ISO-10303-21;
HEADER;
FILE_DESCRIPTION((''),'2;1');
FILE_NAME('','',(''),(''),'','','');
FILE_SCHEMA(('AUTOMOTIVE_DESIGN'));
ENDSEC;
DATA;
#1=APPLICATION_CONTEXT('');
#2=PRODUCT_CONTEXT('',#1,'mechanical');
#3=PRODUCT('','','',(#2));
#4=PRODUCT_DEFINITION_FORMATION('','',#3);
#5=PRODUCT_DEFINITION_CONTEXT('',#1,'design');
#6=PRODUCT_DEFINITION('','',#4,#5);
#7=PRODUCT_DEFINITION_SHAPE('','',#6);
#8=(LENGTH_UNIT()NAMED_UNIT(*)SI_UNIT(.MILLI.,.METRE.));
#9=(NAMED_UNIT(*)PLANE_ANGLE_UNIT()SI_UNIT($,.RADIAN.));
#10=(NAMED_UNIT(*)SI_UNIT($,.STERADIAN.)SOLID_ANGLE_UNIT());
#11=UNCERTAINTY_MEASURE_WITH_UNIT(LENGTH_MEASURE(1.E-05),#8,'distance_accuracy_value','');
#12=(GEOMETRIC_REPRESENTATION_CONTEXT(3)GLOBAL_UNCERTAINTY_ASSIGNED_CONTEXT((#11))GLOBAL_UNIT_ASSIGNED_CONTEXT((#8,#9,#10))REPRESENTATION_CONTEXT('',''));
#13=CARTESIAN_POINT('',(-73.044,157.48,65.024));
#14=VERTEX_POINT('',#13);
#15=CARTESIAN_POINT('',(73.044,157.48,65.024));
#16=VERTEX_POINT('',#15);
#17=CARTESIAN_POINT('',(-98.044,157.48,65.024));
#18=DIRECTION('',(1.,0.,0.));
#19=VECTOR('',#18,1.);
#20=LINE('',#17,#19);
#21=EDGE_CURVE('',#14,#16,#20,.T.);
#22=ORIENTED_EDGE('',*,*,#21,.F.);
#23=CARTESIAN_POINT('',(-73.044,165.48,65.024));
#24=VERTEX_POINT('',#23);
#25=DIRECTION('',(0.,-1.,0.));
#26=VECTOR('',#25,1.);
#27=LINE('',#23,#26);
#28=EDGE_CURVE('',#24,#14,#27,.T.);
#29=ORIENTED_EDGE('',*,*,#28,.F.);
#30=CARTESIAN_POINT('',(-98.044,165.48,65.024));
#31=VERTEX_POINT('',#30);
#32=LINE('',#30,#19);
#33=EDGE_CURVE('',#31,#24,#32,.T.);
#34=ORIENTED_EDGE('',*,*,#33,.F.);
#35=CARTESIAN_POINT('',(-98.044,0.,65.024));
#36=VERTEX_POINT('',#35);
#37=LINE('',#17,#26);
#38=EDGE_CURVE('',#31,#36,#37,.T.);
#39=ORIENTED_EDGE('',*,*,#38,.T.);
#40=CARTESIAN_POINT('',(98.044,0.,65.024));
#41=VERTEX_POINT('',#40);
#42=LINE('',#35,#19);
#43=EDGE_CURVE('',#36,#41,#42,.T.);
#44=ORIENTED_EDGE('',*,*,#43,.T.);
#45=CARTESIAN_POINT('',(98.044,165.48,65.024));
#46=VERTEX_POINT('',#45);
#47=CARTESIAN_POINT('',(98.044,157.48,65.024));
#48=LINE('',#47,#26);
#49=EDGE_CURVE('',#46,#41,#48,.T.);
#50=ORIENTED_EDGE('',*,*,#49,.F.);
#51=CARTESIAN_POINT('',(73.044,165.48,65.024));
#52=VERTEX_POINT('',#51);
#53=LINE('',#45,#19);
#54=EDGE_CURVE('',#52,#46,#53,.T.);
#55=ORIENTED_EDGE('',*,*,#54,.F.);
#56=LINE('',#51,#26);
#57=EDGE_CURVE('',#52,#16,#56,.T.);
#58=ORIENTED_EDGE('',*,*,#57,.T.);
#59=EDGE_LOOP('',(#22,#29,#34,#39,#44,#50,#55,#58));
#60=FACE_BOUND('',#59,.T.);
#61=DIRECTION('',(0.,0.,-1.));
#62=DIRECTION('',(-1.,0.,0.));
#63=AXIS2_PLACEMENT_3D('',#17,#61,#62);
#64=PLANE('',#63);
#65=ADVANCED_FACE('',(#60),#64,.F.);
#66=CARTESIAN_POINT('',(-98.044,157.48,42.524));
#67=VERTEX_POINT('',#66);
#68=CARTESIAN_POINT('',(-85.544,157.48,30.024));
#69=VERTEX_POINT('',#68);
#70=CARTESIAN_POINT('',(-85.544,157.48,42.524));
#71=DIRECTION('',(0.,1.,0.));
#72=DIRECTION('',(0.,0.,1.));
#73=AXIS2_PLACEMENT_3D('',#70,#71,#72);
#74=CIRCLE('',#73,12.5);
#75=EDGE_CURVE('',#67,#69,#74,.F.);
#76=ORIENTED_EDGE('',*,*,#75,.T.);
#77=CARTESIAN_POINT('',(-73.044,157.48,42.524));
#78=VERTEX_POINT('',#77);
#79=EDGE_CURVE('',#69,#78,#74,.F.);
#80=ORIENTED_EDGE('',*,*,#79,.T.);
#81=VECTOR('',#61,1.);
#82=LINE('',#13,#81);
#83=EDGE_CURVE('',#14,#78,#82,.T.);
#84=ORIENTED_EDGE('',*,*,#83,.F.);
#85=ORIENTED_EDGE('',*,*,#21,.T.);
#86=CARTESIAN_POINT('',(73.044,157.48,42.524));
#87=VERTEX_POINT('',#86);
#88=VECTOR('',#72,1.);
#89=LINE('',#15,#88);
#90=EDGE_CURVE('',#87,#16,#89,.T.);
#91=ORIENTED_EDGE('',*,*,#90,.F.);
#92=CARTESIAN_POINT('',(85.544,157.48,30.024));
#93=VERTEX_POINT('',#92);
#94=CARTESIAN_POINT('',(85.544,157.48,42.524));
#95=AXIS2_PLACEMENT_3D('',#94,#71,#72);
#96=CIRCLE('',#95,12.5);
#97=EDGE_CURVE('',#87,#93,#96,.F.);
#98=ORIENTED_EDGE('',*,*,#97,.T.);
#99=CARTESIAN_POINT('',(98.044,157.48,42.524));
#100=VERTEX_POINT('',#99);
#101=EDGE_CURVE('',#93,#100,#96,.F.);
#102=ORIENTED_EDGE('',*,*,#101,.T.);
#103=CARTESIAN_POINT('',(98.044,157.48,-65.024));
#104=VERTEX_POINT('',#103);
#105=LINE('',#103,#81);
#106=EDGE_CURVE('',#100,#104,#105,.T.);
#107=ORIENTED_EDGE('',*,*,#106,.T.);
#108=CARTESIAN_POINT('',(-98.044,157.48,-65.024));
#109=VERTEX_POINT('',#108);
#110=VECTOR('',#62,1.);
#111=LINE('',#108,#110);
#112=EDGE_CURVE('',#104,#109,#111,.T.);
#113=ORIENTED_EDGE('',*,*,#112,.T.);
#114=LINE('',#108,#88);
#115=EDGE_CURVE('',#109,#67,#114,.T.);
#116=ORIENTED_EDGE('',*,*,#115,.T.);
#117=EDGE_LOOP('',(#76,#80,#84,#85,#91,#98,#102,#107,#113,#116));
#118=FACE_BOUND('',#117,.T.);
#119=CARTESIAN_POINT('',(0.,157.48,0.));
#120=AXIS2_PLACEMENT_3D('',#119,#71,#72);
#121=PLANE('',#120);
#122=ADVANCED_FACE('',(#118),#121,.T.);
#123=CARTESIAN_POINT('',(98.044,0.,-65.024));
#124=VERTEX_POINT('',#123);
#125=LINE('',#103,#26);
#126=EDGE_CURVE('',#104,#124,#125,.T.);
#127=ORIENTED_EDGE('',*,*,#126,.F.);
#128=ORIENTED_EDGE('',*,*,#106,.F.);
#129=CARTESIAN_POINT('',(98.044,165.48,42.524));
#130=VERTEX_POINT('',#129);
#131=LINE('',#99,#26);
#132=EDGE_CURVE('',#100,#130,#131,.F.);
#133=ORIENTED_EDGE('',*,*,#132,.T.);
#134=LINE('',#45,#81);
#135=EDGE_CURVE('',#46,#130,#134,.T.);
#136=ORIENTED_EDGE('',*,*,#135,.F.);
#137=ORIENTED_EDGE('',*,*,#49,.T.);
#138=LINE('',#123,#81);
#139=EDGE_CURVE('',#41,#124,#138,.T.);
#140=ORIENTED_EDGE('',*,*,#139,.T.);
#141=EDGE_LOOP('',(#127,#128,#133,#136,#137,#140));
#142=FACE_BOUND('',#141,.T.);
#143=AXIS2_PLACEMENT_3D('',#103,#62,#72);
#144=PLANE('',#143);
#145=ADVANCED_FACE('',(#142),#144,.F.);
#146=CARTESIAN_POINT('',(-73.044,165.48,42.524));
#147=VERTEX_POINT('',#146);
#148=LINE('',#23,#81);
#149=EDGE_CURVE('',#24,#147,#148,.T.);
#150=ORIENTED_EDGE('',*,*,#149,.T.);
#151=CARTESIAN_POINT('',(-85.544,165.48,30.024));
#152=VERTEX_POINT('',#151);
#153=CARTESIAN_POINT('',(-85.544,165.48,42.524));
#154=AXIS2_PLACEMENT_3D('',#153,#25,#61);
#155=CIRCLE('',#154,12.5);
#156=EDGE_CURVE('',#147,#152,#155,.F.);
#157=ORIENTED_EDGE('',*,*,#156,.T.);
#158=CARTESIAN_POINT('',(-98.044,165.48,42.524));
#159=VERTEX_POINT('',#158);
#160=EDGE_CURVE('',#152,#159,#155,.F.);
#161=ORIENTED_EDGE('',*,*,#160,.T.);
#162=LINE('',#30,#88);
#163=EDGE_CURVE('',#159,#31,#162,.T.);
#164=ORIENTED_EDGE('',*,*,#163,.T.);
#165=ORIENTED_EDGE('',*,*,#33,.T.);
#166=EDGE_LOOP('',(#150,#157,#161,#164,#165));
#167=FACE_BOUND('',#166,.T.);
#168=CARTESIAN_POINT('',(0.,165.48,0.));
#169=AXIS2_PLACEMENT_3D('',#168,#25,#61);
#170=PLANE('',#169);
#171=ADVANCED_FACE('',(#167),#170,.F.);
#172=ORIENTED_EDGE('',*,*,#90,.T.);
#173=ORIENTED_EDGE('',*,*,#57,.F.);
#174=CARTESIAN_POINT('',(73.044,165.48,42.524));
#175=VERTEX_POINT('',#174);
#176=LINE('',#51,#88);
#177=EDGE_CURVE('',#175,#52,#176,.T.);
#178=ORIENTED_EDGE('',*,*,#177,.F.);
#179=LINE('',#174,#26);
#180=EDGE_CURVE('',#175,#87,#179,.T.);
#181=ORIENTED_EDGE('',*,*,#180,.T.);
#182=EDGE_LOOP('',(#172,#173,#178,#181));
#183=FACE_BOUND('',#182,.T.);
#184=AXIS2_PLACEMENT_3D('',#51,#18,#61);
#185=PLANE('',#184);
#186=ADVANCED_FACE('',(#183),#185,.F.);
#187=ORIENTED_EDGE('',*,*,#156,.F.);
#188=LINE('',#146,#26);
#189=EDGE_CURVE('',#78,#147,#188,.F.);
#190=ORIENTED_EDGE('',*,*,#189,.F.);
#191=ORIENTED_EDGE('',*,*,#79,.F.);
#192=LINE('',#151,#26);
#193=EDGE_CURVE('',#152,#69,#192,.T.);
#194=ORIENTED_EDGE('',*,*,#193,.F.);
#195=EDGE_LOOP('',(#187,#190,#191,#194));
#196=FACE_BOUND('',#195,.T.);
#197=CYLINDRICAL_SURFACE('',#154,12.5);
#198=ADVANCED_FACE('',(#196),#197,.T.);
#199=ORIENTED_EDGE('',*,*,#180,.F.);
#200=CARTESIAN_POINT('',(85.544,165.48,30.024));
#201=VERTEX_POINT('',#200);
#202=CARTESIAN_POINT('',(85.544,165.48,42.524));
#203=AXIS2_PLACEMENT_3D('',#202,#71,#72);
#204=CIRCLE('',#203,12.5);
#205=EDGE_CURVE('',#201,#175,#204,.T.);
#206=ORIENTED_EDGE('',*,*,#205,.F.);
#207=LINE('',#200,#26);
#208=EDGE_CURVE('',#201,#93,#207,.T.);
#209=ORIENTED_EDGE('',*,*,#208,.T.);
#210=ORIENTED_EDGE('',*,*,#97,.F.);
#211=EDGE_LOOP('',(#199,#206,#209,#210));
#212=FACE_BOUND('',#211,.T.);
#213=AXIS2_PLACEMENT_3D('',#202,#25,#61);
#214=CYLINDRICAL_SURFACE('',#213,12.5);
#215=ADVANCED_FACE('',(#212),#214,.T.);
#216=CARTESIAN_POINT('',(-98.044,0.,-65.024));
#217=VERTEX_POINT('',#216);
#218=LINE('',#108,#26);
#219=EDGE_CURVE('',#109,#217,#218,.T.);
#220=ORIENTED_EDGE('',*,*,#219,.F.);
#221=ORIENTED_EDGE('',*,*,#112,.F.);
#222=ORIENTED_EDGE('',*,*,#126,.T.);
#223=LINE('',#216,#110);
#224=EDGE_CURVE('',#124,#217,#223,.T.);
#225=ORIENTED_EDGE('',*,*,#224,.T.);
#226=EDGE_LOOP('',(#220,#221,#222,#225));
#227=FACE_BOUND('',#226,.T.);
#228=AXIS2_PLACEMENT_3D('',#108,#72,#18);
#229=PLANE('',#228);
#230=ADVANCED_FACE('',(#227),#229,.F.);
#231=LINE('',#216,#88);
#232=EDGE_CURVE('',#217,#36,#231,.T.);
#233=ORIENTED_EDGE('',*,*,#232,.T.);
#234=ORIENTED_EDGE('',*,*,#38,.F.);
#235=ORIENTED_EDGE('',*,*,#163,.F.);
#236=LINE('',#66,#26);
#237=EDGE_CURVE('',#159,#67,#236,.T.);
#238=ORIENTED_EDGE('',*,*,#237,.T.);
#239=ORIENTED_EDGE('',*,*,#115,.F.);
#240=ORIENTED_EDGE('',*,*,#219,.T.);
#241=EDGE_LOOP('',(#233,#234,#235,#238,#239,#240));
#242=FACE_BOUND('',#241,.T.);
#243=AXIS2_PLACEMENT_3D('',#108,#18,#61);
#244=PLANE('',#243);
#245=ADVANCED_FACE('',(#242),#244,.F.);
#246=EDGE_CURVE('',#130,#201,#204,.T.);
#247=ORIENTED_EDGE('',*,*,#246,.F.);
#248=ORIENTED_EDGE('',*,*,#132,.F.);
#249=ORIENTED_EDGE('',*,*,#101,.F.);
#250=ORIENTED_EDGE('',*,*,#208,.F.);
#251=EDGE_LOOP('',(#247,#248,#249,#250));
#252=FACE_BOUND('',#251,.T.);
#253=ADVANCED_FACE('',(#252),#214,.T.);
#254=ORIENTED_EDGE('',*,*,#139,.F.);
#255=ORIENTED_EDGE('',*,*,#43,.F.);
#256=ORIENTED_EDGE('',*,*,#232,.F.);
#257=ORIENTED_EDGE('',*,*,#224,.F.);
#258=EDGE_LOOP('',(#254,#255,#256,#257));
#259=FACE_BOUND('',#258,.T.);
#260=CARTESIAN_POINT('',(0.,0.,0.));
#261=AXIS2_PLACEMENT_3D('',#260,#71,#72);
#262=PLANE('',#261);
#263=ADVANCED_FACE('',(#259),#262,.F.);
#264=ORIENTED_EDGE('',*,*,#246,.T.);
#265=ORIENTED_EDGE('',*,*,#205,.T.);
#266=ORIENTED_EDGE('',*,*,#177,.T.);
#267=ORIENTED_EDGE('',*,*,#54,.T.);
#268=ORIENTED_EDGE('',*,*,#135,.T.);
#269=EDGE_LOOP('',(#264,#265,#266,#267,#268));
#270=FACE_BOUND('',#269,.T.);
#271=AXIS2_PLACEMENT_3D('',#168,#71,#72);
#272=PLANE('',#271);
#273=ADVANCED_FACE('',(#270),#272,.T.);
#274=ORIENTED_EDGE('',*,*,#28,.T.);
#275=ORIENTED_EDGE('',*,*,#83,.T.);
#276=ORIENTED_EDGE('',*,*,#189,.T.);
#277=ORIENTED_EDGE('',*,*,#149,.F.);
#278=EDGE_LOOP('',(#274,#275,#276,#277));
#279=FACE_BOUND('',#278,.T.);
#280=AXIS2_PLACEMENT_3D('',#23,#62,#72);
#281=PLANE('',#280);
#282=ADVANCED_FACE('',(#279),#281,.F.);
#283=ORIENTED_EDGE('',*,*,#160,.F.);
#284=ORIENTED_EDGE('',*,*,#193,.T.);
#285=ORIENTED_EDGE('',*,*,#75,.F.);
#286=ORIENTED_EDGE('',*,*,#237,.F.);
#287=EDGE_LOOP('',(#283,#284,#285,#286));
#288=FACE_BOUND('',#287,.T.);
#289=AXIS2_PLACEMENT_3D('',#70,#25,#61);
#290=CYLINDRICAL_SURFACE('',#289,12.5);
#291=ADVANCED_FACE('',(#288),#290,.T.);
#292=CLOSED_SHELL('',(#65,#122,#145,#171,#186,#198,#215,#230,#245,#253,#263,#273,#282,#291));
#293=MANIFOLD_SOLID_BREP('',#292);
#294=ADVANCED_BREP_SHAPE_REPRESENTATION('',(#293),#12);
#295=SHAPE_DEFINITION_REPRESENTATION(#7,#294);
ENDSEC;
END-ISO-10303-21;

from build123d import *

# Parameters (mm, degrees)
SKETCH_1_W      = 196.088
SKETCH_1_H      = 130.048
EXTRUDE_1_DEPTH = 157.48
SKETCH_3_W      = 25
SKETCH_3_H      = 35
EXTRUDE_2_DEPTH = 8
FILLET_2_R      = 12.5


with BuildPart() as part:
    # 草图1 → 凸台-拉伸1 (new body)
    with BuildSketch(Plane(origin=(0, 0, 0), x_dir=(1, 0, 0), z_dir=(0, 1, 0))):
        Rectangle(SKETCH_1_W, SKETCH_1_H)
    extrude(amount=EXTRUDE_1_DEPTH)

    # 草图3 → 凸台-拉伸2 (add)
    with BuildSketch(Plane(origin=(0, 157.48, 0), x_dir=(1, 0, 0), z_dir=(0, 1, 0))):
        with Locations((-85.544, -47.524)):
            Rectangle(SKETCH_3_W, SKETCH_3_H)
        with Locations((85.544, -47.524)):
            Rectangle(SKETCH_3_W, SKETCH_3_H)
    extrude(amount=EXTRUDE_2_DEPTH)

    # 圆角2
    fillet_2_edges = [part.edges().sort_by_distance(p)[0] for p in [
        (73.044, 161.48, 30.024),
        (98.044, 161.48, 30.024),
        (-98.044, 161.48, 30.024),
        (-73.044, 161.48, 30.024),
    ]]
    fillet(fillet_2_edges, radius=FILLET_2_R - 0.0001)  # a hair under: the kernel refuses the full size


solid = part.part
